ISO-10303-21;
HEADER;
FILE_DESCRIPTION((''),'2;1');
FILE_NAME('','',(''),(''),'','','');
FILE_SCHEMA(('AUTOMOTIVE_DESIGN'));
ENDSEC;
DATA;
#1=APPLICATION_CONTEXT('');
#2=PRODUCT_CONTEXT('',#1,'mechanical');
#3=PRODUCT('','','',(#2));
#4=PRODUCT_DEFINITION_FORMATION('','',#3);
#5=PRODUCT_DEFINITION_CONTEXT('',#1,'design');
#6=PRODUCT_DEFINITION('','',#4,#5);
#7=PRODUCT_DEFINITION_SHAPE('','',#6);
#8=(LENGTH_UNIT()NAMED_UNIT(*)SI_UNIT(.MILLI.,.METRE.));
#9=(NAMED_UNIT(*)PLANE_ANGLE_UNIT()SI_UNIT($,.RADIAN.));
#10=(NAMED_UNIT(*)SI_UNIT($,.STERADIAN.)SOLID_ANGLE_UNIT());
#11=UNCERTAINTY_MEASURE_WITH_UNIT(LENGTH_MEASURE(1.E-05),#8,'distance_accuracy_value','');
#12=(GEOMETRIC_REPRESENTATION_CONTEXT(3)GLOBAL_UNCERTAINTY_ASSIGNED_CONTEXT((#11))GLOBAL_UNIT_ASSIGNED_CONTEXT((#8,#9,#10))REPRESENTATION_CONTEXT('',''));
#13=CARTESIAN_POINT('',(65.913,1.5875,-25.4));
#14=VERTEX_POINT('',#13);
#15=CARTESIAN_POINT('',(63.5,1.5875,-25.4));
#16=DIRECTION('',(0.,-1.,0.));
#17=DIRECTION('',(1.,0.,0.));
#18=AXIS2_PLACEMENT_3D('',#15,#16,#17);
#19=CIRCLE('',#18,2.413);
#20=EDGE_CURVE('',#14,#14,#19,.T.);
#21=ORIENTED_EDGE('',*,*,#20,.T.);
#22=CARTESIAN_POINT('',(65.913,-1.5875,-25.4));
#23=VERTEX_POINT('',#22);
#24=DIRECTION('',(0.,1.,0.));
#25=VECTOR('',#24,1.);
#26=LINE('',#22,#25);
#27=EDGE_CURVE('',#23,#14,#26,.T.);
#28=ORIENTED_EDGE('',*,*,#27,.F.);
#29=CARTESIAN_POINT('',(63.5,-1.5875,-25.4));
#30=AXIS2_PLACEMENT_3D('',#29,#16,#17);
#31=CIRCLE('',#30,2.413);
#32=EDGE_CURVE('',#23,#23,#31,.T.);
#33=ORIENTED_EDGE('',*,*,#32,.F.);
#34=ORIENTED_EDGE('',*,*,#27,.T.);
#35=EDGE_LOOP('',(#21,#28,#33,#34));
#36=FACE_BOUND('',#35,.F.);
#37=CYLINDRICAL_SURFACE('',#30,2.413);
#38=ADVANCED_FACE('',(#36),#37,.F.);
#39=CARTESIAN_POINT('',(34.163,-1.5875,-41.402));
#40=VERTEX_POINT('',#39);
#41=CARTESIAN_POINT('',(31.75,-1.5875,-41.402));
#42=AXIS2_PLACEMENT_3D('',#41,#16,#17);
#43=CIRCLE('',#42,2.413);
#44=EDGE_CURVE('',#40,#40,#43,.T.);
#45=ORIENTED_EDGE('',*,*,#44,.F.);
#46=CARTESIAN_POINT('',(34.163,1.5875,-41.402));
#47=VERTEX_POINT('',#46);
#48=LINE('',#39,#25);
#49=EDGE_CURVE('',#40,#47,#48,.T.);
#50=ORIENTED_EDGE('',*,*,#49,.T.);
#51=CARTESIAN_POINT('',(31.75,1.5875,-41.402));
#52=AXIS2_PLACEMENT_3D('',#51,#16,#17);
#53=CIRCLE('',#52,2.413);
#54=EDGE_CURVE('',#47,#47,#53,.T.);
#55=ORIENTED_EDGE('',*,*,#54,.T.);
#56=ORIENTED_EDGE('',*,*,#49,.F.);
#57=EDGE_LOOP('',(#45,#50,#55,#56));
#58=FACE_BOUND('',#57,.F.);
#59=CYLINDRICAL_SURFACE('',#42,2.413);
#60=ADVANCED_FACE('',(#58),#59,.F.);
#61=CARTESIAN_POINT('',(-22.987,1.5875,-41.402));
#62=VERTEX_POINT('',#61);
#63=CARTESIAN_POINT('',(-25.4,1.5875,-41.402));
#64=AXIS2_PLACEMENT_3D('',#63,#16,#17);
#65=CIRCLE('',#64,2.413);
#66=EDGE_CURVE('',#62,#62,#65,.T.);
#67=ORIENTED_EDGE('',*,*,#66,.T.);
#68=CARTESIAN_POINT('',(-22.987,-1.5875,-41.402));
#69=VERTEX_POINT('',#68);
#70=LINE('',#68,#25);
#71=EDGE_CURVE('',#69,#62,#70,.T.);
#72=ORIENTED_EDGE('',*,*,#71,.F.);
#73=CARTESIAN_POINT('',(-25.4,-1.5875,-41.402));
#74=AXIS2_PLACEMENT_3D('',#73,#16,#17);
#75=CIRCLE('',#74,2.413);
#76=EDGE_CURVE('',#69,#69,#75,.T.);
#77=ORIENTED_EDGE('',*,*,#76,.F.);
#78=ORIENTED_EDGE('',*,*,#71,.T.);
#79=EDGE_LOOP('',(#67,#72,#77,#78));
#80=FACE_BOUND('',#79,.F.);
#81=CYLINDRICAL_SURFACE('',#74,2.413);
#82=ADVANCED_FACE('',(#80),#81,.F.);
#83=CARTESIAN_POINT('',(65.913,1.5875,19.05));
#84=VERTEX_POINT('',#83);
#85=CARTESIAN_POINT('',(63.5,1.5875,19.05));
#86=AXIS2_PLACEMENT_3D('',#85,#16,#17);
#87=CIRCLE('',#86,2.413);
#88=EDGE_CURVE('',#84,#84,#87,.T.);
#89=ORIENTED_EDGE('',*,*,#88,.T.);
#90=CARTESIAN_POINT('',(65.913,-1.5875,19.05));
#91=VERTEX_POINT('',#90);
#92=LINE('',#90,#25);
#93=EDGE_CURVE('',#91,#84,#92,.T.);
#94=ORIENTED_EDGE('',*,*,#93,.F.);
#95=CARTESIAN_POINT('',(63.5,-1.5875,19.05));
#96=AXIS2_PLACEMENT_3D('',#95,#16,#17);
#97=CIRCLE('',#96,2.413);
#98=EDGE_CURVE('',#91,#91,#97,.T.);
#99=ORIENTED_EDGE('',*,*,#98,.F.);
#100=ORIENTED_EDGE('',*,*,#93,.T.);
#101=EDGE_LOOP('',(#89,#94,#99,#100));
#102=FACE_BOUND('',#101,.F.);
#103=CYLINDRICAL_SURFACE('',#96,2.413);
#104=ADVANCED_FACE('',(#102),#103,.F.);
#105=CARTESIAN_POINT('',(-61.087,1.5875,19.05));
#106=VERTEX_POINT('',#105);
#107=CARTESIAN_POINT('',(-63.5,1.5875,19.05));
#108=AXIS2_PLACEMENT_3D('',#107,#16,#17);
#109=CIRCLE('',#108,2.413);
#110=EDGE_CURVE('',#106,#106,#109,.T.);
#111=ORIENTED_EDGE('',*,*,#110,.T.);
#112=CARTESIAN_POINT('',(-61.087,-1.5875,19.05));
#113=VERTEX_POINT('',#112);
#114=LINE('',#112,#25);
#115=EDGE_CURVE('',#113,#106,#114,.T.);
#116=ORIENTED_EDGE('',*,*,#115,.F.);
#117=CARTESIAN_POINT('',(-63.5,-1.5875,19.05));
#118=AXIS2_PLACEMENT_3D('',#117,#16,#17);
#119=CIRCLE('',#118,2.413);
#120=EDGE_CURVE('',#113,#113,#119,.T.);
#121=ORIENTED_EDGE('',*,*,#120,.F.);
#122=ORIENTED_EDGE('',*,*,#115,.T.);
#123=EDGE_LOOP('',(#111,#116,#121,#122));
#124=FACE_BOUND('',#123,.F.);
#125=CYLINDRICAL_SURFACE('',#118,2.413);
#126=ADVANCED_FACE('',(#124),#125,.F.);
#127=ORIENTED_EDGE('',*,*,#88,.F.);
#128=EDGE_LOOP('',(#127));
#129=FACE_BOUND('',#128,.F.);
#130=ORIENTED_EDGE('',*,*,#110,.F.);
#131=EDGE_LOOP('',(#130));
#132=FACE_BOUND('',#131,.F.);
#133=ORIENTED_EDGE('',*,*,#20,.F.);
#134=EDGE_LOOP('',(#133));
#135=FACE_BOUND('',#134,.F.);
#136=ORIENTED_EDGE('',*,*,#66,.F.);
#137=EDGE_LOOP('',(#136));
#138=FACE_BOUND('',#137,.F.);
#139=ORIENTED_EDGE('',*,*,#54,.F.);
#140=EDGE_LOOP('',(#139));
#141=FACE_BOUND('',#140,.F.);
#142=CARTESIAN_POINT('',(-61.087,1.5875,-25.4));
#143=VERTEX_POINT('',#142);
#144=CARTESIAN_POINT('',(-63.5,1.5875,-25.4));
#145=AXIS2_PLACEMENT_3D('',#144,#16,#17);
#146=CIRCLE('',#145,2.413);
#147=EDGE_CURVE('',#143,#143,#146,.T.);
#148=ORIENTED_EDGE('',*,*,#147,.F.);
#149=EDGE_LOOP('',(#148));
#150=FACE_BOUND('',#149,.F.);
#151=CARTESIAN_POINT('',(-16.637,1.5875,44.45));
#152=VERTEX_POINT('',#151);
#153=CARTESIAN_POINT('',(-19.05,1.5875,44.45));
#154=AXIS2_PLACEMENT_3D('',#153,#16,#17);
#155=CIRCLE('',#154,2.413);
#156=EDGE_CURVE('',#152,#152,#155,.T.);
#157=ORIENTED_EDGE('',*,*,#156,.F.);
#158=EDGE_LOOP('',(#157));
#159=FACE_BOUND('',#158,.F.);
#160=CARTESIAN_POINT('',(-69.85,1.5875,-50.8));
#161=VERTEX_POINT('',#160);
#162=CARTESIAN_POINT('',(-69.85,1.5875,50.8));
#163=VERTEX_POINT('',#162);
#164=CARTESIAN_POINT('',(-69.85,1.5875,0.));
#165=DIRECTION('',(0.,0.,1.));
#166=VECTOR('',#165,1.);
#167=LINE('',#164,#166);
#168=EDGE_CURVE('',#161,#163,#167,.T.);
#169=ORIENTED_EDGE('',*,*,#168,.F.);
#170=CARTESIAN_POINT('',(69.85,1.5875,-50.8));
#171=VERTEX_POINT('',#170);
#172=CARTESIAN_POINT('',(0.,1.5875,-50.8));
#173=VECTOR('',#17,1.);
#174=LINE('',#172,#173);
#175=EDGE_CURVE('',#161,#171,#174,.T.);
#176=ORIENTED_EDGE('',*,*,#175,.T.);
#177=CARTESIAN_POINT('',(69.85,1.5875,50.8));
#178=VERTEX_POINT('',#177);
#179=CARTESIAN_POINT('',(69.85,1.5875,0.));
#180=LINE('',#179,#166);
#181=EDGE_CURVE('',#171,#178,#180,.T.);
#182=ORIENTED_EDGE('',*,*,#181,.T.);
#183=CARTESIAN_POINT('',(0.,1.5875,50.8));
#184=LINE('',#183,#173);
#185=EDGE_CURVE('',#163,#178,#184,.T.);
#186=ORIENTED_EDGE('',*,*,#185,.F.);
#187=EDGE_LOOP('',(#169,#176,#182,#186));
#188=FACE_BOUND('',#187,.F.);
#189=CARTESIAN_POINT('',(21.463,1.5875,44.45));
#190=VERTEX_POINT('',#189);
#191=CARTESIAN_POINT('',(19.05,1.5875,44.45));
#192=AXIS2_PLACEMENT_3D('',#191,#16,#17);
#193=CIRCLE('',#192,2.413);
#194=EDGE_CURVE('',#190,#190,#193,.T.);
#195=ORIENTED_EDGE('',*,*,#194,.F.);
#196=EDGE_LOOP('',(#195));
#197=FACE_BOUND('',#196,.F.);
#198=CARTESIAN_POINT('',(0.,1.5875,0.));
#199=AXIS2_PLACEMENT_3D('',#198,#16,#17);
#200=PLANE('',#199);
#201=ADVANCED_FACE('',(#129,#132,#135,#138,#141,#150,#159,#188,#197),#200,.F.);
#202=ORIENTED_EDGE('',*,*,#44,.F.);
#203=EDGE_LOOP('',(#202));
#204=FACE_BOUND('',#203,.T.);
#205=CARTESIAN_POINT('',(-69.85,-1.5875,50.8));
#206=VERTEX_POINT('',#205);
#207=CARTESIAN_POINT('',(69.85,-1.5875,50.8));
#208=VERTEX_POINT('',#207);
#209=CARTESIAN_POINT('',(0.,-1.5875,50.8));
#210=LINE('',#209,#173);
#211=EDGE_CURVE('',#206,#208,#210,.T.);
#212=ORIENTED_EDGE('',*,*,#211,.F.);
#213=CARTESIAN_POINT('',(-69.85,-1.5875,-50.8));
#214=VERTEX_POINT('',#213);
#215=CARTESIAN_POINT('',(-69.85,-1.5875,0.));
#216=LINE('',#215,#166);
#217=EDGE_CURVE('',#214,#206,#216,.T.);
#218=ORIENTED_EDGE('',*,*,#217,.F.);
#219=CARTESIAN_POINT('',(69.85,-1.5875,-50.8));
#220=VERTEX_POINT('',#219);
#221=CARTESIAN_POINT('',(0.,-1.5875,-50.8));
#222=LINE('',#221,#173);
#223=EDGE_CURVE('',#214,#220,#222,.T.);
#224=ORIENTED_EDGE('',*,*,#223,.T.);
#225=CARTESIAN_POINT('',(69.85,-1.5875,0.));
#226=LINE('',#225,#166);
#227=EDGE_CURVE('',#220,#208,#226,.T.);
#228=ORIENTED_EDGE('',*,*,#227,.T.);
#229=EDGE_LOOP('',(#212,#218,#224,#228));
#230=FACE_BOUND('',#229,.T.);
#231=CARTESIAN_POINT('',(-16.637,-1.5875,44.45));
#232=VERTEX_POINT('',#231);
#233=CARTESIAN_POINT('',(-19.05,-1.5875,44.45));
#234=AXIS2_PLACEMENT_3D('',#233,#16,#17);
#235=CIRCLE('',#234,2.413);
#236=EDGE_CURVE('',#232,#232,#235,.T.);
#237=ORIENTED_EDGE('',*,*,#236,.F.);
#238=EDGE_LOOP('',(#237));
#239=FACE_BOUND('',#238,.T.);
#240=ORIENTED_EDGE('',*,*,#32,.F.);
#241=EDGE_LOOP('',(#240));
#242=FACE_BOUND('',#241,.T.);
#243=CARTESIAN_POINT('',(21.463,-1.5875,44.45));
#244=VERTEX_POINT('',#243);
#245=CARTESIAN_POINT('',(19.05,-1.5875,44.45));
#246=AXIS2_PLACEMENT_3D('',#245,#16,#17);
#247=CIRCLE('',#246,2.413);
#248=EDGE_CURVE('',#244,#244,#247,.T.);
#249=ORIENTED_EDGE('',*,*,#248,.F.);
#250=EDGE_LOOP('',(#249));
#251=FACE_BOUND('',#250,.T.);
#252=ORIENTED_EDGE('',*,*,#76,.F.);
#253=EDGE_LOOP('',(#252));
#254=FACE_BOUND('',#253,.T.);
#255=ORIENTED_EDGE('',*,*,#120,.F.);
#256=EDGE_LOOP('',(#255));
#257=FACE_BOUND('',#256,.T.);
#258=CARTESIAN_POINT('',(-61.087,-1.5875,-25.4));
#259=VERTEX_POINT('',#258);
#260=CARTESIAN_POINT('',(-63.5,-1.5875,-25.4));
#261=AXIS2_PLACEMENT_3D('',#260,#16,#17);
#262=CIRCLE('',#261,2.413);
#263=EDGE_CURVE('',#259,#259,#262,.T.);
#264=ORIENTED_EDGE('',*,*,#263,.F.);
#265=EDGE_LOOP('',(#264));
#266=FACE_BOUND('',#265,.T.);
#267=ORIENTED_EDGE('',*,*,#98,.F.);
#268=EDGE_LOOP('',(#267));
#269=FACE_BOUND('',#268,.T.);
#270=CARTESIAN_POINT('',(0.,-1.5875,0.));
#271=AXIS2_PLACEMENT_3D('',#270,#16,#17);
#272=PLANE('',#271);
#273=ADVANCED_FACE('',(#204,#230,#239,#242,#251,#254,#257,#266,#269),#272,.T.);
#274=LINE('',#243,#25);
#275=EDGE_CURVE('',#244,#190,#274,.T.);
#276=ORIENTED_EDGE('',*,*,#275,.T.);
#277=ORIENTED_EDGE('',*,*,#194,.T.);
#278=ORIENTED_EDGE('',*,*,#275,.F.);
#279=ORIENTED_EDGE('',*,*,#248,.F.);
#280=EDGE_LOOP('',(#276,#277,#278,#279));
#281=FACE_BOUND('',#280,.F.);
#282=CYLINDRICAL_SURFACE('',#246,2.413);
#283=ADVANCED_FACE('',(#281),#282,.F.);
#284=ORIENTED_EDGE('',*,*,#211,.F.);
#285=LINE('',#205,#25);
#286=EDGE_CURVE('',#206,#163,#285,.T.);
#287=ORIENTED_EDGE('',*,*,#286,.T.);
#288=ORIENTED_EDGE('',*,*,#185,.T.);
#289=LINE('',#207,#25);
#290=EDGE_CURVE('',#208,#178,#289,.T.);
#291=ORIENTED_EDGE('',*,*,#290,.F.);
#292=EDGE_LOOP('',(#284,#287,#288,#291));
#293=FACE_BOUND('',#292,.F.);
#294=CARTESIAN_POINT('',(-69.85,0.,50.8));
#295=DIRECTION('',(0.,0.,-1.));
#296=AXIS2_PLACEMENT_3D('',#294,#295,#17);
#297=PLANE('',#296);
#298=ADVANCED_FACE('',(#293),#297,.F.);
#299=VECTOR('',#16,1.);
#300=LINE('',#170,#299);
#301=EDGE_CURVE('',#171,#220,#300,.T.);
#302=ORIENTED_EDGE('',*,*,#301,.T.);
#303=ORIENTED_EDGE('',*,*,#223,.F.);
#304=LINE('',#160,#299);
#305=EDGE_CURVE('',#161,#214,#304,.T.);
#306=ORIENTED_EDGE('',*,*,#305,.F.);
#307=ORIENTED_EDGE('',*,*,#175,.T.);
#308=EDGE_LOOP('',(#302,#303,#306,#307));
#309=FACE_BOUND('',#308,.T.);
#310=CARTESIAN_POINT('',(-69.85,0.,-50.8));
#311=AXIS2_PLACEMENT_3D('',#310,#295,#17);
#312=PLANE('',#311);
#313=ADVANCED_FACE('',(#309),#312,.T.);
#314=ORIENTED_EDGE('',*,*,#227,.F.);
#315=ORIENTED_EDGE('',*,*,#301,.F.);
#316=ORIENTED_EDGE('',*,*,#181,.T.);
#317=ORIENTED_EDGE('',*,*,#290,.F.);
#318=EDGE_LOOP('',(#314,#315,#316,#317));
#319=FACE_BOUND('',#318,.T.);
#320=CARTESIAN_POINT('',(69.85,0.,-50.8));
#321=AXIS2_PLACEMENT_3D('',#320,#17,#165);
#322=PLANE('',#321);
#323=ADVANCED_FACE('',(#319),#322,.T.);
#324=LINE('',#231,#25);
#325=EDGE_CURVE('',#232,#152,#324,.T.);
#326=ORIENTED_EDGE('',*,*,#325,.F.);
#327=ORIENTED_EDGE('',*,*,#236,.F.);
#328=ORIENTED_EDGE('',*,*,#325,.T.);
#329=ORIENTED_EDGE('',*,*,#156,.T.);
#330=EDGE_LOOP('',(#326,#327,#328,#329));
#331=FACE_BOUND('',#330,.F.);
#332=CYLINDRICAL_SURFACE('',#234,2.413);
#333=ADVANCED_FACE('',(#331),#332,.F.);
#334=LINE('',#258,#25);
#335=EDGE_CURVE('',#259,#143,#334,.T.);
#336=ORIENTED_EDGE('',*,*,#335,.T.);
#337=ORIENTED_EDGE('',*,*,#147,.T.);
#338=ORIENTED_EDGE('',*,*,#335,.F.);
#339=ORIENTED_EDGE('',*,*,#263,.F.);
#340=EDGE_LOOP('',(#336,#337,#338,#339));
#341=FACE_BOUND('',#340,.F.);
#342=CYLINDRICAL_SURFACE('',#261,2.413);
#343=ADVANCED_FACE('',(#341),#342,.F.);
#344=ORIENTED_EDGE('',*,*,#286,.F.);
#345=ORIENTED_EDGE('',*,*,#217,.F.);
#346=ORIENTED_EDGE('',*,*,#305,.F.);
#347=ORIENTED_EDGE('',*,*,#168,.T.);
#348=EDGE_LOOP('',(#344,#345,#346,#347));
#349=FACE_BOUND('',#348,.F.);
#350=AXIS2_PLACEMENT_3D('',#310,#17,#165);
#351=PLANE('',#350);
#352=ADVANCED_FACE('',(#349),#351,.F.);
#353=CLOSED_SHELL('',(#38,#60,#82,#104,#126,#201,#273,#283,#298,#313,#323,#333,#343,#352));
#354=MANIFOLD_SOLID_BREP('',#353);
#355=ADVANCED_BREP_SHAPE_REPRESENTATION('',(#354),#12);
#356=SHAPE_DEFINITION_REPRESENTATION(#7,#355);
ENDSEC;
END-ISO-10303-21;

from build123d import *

# Parameters (mm, degrees)
F0_W     = 139.7
F0_H     = 101.6
F1_DEPTH = 1.5875
F2_R     = 2.413
F3_DEPTH = 3.175


# Not quite as in the source:
# - a length typed as a fraction of an inch, garbled in the dataset ("3 / 203.2 mm" for 3/8 in), is restored


with BuildPart() as f1:
    # F0 (on Front) → F1 (new body, symmetric)
    with BuildSketch(Plane.XZ):
        Rectangle(F0_W, F0_H)
    extrude(amount=F1_DEPTH, both=True)

    # F2 (on face) → F3 (cut, through all)
    with BuildSketch(Plane.XZ.offset(1.5875)):
        with Locations((-63.5, 19.05)):
            Circle(F2_R)
        with Locations((-63.5, -25.4)):
            Circle(F2_R)
        with Locations((63.5, -25.4)):
            Circle(F2_R)
        with Locations((63.5, 19.05)):
            Circle(F2_R)
        with Locations((-19.05, 44.45)):
            Circle(F2_R)
        with Locations((19.05, 44.45)):
            Circle(F2_R)
        with Locations((-25.4, -41.402)):
            Circle(F2_R)
        with Locations((31.75, -41.402)):
            Circle(F2_R)
    extrude(amount=-F3_DEPTH, mode=Mode.SUBTRACT)


solid = f1.part
